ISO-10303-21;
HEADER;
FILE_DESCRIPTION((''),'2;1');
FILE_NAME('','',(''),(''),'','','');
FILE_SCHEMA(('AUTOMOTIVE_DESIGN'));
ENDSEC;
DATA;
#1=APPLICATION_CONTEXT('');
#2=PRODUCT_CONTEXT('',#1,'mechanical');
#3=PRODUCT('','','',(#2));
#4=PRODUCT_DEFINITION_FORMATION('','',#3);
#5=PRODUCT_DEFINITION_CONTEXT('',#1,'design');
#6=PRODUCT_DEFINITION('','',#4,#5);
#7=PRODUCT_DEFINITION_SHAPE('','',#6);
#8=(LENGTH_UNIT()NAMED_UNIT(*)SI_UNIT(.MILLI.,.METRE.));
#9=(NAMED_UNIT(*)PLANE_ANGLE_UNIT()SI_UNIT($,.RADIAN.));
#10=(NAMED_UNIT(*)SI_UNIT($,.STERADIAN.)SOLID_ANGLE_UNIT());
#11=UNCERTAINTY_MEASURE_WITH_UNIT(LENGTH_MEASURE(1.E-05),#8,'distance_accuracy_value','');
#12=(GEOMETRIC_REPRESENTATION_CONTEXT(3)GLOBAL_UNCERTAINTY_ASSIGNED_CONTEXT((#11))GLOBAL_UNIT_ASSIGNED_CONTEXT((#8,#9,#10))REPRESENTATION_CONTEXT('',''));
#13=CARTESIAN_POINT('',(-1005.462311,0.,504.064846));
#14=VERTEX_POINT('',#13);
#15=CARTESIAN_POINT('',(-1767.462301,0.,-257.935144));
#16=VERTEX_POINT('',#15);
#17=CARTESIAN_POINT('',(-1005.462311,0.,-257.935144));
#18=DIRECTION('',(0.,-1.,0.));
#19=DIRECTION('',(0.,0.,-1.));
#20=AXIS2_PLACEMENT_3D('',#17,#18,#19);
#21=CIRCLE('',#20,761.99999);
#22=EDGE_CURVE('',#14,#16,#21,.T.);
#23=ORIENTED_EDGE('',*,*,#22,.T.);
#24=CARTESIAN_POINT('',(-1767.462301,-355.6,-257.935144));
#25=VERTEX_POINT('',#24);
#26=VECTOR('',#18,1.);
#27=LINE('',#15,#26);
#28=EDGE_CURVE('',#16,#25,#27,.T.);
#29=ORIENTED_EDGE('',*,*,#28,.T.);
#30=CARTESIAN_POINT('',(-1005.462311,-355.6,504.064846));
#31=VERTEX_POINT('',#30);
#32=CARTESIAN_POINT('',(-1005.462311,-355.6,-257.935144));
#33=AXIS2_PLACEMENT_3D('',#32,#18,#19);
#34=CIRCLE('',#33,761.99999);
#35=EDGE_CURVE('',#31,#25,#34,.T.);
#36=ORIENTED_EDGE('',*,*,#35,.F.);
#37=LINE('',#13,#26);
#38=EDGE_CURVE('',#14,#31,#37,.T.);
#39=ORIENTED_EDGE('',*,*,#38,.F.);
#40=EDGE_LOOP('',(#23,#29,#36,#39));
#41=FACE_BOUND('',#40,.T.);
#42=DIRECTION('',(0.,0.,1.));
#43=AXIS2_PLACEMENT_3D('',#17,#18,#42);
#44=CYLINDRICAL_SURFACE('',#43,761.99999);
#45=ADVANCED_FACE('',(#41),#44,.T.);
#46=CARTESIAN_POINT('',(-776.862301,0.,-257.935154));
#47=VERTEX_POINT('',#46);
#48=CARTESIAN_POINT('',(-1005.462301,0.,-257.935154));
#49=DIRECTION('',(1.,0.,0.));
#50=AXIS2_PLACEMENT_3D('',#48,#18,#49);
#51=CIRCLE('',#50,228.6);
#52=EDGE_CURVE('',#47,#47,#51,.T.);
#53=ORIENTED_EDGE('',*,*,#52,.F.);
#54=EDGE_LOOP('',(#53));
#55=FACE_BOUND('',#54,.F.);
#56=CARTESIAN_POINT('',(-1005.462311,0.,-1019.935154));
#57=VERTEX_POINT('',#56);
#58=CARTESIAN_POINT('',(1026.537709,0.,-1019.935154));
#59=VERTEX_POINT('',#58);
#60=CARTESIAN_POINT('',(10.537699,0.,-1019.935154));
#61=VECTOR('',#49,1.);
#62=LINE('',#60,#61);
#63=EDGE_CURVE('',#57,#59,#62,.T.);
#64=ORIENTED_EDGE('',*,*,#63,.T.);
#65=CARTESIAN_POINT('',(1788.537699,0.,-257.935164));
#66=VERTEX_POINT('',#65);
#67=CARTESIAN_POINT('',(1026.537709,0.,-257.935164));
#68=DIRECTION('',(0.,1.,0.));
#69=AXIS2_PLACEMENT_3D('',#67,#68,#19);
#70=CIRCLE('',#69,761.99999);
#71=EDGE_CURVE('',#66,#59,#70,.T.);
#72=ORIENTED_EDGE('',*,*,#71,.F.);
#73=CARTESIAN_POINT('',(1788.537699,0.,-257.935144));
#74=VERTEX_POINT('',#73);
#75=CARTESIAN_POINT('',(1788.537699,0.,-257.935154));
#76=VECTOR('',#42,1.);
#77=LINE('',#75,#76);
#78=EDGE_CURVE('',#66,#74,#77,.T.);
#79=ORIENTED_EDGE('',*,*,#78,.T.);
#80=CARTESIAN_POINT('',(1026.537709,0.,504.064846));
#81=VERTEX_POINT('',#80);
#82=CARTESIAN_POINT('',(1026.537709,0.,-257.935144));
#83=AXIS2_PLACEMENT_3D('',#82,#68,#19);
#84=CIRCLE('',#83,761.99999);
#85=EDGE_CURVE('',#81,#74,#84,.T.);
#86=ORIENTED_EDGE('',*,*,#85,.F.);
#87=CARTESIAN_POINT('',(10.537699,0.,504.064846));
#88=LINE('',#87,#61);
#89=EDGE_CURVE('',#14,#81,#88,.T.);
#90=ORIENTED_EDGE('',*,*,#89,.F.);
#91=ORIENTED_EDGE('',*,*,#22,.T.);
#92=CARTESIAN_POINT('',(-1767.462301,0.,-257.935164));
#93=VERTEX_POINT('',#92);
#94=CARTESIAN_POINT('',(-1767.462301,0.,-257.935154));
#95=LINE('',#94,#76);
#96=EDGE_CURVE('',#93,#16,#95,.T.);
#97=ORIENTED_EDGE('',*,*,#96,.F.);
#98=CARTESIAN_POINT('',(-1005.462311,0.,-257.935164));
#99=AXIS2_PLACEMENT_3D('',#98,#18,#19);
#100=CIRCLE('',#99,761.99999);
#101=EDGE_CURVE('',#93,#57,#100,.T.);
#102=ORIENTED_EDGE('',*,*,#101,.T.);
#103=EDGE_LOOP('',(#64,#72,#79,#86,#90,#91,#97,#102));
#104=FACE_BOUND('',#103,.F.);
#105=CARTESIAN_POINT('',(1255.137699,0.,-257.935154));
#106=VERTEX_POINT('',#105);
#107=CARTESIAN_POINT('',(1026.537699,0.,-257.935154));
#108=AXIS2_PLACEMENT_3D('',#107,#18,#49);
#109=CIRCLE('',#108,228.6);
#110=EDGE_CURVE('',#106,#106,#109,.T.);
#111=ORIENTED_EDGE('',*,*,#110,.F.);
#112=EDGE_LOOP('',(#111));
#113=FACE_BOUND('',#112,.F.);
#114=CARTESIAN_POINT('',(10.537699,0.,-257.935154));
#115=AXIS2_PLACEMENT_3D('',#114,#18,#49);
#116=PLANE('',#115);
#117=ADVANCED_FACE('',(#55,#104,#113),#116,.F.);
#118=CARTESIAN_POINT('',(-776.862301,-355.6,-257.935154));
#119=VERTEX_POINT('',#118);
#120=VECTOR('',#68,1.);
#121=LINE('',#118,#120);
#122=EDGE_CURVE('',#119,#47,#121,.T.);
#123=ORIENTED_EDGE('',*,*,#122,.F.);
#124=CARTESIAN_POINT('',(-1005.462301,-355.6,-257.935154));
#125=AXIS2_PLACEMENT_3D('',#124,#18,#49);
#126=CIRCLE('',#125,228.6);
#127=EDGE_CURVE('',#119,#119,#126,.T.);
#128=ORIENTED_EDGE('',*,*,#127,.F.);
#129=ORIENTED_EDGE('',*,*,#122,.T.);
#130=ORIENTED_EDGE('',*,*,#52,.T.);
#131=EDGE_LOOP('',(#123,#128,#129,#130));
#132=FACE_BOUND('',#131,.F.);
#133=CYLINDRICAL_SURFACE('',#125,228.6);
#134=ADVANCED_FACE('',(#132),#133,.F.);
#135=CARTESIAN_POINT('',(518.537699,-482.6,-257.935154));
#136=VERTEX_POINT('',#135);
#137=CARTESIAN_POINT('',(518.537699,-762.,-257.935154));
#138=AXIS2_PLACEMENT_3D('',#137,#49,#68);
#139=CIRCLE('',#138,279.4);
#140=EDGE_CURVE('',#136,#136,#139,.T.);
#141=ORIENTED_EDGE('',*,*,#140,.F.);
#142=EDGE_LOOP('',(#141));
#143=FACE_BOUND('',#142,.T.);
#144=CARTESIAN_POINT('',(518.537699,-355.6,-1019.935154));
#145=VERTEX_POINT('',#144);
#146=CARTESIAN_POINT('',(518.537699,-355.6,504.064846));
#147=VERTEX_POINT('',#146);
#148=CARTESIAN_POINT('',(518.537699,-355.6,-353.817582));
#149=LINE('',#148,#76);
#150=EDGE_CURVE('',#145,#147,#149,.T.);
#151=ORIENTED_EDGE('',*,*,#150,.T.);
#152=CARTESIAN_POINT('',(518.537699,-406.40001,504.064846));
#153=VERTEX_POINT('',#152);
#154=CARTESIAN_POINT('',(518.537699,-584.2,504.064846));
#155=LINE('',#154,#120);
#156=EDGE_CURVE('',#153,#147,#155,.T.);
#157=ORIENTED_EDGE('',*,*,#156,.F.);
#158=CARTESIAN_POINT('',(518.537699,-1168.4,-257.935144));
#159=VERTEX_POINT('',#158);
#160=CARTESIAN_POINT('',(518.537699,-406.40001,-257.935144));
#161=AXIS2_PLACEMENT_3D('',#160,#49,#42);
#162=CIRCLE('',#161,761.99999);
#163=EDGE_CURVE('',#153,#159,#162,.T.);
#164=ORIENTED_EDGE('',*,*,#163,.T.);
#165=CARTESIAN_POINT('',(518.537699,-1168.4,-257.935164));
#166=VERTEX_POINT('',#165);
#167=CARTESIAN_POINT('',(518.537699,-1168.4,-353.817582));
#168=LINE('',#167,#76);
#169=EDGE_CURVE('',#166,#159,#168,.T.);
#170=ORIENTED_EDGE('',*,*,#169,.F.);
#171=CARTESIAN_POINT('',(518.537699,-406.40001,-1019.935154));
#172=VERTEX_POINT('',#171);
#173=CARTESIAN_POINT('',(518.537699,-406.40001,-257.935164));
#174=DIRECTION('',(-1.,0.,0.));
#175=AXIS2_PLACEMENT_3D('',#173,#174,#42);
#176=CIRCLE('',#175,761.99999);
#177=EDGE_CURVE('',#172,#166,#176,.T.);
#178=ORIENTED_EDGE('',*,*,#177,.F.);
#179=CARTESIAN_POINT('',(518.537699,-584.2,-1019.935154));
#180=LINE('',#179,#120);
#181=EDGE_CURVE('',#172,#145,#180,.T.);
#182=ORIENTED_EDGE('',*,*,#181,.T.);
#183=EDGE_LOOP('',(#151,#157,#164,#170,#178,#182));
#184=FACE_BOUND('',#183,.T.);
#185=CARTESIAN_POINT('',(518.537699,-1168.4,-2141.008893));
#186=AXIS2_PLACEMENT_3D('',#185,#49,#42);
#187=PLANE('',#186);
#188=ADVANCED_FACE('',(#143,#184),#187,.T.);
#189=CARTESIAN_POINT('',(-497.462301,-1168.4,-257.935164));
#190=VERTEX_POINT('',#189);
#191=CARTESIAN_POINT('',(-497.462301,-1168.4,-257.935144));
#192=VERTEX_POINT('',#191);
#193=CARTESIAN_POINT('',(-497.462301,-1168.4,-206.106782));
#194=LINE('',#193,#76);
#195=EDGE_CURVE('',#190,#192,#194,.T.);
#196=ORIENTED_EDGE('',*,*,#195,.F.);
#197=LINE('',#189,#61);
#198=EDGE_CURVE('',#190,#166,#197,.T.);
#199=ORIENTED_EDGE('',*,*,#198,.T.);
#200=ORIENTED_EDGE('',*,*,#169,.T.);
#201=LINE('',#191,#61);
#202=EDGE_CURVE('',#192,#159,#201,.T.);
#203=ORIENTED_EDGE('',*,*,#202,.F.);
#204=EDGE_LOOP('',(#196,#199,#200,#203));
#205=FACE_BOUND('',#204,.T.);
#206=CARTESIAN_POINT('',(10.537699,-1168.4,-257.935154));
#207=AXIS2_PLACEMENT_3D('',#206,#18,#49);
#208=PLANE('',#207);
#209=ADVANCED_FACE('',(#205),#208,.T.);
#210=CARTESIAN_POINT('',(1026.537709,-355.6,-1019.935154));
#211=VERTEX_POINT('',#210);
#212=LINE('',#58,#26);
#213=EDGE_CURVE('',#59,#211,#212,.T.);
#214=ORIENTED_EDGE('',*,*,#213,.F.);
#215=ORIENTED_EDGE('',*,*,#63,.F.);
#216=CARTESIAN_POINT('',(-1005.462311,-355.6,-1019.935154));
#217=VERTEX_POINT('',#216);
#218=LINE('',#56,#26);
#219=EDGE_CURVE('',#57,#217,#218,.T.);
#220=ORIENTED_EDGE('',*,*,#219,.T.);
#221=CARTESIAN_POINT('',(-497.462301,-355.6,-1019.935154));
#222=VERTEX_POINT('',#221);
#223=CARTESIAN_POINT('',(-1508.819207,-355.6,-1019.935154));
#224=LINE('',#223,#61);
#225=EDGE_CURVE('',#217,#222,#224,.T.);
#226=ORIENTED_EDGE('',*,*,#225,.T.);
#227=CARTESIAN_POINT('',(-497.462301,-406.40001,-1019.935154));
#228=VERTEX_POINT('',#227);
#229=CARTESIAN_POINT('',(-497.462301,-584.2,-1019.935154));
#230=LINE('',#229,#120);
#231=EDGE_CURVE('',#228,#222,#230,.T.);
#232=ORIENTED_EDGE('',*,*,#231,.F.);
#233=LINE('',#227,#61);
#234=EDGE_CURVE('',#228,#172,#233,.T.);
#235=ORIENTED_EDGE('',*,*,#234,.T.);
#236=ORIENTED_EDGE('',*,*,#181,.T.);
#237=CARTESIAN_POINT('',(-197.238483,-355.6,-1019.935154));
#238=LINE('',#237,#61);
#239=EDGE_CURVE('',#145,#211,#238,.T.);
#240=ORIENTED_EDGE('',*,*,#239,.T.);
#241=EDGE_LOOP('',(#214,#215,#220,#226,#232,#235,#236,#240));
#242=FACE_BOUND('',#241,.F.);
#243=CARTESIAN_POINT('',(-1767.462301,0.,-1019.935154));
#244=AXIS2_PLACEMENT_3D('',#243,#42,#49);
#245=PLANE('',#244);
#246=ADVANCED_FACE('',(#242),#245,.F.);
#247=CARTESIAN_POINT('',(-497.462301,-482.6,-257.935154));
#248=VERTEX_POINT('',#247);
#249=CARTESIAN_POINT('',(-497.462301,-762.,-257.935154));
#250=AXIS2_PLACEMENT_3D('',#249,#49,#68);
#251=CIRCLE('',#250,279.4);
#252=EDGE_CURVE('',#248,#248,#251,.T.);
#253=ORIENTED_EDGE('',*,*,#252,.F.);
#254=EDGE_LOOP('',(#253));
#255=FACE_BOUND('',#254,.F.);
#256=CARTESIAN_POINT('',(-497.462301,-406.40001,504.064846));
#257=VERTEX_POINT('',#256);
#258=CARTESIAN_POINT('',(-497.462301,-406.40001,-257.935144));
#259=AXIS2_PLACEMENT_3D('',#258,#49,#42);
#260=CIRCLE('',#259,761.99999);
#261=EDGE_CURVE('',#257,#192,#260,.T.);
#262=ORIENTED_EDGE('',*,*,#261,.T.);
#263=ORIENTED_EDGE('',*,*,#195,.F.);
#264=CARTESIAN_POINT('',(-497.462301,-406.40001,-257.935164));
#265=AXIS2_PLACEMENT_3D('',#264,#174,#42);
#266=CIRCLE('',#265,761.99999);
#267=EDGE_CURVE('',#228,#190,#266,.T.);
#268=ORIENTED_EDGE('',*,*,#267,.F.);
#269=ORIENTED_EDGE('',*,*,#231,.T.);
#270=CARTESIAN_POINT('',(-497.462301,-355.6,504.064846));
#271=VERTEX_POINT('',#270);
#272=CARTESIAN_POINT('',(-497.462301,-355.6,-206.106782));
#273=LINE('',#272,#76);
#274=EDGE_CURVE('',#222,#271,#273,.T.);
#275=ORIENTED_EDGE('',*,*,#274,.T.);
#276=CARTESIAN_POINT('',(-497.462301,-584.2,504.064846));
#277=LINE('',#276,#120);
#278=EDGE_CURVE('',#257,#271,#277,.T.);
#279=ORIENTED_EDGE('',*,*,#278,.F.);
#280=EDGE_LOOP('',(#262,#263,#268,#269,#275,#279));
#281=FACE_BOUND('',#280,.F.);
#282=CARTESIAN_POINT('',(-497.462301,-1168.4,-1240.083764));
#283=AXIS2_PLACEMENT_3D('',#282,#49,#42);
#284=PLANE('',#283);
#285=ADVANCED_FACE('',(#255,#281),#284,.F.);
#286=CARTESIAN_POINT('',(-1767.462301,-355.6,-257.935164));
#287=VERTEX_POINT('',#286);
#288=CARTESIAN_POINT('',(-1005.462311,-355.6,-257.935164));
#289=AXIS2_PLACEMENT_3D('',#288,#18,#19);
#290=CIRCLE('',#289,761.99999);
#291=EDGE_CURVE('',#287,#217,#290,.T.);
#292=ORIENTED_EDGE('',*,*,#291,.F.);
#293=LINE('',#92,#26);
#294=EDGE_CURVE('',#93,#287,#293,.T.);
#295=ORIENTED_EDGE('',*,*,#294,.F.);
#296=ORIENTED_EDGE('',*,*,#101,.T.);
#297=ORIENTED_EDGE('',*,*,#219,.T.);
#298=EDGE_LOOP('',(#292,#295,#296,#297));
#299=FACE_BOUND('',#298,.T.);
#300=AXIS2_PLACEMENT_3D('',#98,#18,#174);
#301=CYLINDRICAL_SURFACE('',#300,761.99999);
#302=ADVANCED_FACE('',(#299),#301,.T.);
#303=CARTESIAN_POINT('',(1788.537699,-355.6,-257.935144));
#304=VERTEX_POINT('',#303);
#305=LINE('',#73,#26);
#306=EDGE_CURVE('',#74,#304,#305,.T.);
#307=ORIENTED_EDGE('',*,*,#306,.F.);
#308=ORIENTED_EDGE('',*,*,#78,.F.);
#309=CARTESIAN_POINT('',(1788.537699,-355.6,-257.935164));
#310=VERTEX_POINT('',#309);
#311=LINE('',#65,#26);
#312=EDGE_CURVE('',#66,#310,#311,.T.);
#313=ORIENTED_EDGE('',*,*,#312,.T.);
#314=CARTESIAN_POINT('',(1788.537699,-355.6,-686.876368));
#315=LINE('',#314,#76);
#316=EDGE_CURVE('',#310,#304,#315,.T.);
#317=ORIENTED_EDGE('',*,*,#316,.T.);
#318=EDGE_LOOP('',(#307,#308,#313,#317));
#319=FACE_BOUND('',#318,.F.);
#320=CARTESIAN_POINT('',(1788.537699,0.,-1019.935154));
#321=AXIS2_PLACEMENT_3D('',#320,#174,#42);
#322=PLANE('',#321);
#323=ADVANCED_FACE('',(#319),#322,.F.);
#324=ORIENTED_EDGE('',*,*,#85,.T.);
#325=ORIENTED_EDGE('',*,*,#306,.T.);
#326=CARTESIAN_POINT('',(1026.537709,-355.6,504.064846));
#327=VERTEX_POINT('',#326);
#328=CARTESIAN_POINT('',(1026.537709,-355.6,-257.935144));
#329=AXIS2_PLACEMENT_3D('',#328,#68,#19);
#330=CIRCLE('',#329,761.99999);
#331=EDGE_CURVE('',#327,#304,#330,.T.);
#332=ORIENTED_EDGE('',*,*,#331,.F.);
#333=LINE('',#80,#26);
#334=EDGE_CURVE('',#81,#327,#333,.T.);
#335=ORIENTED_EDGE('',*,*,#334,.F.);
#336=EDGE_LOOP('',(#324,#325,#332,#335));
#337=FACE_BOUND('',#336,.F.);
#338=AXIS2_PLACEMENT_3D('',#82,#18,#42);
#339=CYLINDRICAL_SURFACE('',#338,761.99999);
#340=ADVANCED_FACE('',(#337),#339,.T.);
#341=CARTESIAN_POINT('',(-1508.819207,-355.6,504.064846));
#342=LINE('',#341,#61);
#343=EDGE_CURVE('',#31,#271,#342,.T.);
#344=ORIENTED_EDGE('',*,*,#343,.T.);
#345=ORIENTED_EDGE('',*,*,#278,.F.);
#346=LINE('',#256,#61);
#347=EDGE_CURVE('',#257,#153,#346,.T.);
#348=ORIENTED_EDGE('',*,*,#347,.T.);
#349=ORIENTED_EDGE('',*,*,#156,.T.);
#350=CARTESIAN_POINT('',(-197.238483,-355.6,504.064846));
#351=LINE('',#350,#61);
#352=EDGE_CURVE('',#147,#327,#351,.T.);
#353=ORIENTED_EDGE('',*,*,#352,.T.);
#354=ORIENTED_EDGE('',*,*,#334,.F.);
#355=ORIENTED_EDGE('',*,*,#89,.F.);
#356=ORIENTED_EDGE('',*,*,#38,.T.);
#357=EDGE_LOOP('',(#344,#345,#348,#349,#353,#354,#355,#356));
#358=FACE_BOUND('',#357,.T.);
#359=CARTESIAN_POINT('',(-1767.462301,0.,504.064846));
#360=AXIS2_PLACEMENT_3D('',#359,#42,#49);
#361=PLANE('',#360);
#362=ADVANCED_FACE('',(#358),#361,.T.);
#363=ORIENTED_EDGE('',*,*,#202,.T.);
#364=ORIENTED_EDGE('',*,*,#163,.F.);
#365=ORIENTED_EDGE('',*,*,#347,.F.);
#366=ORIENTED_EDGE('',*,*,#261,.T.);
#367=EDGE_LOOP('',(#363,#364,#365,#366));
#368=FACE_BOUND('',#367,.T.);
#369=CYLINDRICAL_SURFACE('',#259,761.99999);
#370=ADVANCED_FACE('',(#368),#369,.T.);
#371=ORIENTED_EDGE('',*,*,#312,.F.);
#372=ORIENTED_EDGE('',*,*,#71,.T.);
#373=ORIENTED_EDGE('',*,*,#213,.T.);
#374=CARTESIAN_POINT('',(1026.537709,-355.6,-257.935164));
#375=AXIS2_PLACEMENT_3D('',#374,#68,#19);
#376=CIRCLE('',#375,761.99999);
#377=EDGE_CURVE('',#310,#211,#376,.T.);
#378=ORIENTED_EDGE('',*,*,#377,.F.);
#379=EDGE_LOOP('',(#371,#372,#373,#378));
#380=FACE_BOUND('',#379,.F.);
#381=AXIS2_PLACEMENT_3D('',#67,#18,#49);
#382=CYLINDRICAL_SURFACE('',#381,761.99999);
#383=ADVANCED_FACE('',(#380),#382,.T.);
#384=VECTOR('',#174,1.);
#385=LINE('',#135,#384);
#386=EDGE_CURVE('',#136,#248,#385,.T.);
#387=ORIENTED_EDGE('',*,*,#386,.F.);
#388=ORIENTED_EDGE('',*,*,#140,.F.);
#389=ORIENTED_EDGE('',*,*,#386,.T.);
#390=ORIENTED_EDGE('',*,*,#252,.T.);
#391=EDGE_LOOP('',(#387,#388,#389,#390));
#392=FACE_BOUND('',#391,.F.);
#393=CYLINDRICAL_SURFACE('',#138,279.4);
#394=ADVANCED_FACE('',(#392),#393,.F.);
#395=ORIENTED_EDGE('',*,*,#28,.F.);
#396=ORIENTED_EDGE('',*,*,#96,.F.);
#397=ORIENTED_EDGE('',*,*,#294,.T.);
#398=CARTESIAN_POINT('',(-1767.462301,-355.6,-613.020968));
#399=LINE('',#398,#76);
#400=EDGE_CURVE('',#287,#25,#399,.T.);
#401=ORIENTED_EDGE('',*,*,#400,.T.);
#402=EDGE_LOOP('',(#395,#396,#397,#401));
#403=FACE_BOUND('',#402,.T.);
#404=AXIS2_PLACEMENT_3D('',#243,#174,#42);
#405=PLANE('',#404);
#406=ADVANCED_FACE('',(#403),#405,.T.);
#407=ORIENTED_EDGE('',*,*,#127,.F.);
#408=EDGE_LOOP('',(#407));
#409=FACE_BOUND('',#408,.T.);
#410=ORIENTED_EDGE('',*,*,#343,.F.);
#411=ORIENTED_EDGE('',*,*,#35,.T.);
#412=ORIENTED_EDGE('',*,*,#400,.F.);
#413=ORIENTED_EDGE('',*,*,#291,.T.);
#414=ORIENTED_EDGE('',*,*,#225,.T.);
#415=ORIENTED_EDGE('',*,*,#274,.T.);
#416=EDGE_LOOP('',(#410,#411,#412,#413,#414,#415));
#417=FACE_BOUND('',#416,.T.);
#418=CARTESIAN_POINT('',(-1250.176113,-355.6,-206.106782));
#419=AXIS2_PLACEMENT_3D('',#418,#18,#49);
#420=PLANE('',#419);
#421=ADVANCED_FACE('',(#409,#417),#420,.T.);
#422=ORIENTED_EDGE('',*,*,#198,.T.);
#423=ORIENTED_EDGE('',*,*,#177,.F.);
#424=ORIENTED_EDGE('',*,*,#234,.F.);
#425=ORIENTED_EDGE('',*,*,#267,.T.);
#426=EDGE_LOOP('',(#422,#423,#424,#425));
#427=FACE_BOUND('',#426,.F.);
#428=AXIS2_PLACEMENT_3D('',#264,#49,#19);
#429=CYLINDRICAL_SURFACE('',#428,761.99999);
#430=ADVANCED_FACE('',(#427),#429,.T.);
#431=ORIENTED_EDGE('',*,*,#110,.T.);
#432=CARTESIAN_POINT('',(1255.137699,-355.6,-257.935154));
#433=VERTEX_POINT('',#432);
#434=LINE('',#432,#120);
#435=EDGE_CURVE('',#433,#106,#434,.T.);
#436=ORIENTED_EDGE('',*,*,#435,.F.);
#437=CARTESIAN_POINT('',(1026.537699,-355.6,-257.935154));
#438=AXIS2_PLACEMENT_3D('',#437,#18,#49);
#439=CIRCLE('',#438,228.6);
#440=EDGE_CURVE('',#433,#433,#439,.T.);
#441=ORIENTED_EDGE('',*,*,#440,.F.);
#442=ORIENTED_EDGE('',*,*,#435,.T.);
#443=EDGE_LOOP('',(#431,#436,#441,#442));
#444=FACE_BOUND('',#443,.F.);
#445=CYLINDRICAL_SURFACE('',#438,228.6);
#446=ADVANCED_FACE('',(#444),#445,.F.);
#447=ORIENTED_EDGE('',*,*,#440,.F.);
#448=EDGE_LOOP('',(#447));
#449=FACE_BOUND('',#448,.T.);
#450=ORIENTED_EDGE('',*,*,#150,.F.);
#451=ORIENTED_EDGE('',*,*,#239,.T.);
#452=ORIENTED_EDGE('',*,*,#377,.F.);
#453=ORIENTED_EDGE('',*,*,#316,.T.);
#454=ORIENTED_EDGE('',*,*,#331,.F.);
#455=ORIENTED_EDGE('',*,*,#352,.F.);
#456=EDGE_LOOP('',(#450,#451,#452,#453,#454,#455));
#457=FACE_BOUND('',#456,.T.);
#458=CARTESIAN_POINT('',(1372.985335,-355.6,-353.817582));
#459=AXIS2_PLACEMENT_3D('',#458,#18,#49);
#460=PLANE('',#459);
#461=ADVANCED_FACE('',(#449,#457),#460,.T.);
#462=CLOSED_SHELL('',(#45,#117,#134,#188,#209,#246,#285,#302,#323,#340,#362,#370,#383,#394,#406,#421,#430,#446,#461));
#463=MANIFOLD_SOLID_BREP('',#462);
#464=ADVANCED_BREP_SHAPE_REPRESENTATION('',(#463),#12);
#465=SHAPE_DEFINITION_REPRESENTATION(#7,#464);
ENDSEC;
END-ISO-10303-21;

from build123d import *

# Parameters (mm, degrees)
F0_W      = 3556
F0_H      = 1524
F1_DEPTH  = 1168.4
F2_W      = 1505.427623216
F2_H      = 2067.9539636784
F3_DEPTH  = 812.8
F4_W      = 1708.8952731906
F4_H      = 3574.3826215129
F5_DEPTH  = 812.8
F6_R      = 761.99999
F7_R      = 761.99999
F9_R      = 228.6
F10_DEPTH = 355.601
F8_R      = 228.6
F11_DEPTH = 355.601
F12_R     = 279.4
F13_DEPTH = 2286.001


# Not quite as in the source:
# - a fillet or chamfer is up to 0.001 mm smaller than in the source, because OpenCascade refuses the exact size


with BuildPart() as f1:
    # F0 (on Front) → F1 (new body)
    with BuildSketch(Plane.XZ):
        with Locations((10.5376988649, -257.9351535461)):
            Rectangle(F0_W, F0_H)
    extrude(amount=F1_DEPTH)

    # F2 (on face) → F3 (cut)
    with BuildSketch(Plane.XZ.offset(1168.4)):
        with Locations((-1250.1761127431, -206.1067819595)):
            Rectangle(F2_W, F2_H)
    extrude(amount=-F3_DEPTH, mode=Mode.SUBTRACT)

    # F4 (on face) → F5 (cut)
    with BuildSketch(Plane.XZ.offset(1168.4)):
        with Locations((1372.9853354602, -353.8175821304)):
            Rectangle(F4_W, F4_H)
    extrude(amount=-F5_DEPTH, mode=Mode.SUBTRACT)

    # F6 (radius 762 in the source; OpenCascade refuses exactly that, so slightly less here)
    f6_edges = [f1.edges().sort_by_distance(p)[0] for p in [
        (10.537699, -1168.4, 504.064846),
        (10.537699, -1168.4, -1019.935154),
    ]]
    fillet(f6_edges, radius=F6_R)

    # F7 (radius 762 in the source; OpenCascade refuses exactly that, so slightly less here)
    f7_edges = [f1.edges().sort_by_distance(p)[0] for p in [
        (1788.537699, -177.8, -1019.935154),
        (1788.537699, -177.8, 504.064846),
        (-1767.462301, -177.8, 504.064846),
        (-1767.462301, -177.8, -1019.935154),
    ]]
    fillet(f7_edges, radius=F7_R)

    # F9 (on face) → F10 (cut, through all)
    with BuildSketch(Plane.XZ.offset(355.6)):
        with Locations((1026.5376988649, -257.9351535461)):
            Circle(F9_R)
    extrude(amount=-F10_DEPTH, mode=Mode.SUBTRACT)

    # F8 (on face) → F11 (cut, through all)
    with BuildSketch(Plane.XZ.offset(355.6)):
        with Locations((-1005.4623011351, -257.9351535461)):
            Circle(F8_R)
    extrude(amount=-F11_DEPTH, mode=Mode.SUBTRACT)

    # F12 (on face) → F13 (cut, through all)
    with BuildSketch(Plane.YZ.offset(518.5376988649)):
        with Locations((-762, -257.9351535461)):
            Circle(F12_R)
    extrude(amount=-F13_DEPTH, mode=Mode.SUBTRACT)


solid = f1.part
